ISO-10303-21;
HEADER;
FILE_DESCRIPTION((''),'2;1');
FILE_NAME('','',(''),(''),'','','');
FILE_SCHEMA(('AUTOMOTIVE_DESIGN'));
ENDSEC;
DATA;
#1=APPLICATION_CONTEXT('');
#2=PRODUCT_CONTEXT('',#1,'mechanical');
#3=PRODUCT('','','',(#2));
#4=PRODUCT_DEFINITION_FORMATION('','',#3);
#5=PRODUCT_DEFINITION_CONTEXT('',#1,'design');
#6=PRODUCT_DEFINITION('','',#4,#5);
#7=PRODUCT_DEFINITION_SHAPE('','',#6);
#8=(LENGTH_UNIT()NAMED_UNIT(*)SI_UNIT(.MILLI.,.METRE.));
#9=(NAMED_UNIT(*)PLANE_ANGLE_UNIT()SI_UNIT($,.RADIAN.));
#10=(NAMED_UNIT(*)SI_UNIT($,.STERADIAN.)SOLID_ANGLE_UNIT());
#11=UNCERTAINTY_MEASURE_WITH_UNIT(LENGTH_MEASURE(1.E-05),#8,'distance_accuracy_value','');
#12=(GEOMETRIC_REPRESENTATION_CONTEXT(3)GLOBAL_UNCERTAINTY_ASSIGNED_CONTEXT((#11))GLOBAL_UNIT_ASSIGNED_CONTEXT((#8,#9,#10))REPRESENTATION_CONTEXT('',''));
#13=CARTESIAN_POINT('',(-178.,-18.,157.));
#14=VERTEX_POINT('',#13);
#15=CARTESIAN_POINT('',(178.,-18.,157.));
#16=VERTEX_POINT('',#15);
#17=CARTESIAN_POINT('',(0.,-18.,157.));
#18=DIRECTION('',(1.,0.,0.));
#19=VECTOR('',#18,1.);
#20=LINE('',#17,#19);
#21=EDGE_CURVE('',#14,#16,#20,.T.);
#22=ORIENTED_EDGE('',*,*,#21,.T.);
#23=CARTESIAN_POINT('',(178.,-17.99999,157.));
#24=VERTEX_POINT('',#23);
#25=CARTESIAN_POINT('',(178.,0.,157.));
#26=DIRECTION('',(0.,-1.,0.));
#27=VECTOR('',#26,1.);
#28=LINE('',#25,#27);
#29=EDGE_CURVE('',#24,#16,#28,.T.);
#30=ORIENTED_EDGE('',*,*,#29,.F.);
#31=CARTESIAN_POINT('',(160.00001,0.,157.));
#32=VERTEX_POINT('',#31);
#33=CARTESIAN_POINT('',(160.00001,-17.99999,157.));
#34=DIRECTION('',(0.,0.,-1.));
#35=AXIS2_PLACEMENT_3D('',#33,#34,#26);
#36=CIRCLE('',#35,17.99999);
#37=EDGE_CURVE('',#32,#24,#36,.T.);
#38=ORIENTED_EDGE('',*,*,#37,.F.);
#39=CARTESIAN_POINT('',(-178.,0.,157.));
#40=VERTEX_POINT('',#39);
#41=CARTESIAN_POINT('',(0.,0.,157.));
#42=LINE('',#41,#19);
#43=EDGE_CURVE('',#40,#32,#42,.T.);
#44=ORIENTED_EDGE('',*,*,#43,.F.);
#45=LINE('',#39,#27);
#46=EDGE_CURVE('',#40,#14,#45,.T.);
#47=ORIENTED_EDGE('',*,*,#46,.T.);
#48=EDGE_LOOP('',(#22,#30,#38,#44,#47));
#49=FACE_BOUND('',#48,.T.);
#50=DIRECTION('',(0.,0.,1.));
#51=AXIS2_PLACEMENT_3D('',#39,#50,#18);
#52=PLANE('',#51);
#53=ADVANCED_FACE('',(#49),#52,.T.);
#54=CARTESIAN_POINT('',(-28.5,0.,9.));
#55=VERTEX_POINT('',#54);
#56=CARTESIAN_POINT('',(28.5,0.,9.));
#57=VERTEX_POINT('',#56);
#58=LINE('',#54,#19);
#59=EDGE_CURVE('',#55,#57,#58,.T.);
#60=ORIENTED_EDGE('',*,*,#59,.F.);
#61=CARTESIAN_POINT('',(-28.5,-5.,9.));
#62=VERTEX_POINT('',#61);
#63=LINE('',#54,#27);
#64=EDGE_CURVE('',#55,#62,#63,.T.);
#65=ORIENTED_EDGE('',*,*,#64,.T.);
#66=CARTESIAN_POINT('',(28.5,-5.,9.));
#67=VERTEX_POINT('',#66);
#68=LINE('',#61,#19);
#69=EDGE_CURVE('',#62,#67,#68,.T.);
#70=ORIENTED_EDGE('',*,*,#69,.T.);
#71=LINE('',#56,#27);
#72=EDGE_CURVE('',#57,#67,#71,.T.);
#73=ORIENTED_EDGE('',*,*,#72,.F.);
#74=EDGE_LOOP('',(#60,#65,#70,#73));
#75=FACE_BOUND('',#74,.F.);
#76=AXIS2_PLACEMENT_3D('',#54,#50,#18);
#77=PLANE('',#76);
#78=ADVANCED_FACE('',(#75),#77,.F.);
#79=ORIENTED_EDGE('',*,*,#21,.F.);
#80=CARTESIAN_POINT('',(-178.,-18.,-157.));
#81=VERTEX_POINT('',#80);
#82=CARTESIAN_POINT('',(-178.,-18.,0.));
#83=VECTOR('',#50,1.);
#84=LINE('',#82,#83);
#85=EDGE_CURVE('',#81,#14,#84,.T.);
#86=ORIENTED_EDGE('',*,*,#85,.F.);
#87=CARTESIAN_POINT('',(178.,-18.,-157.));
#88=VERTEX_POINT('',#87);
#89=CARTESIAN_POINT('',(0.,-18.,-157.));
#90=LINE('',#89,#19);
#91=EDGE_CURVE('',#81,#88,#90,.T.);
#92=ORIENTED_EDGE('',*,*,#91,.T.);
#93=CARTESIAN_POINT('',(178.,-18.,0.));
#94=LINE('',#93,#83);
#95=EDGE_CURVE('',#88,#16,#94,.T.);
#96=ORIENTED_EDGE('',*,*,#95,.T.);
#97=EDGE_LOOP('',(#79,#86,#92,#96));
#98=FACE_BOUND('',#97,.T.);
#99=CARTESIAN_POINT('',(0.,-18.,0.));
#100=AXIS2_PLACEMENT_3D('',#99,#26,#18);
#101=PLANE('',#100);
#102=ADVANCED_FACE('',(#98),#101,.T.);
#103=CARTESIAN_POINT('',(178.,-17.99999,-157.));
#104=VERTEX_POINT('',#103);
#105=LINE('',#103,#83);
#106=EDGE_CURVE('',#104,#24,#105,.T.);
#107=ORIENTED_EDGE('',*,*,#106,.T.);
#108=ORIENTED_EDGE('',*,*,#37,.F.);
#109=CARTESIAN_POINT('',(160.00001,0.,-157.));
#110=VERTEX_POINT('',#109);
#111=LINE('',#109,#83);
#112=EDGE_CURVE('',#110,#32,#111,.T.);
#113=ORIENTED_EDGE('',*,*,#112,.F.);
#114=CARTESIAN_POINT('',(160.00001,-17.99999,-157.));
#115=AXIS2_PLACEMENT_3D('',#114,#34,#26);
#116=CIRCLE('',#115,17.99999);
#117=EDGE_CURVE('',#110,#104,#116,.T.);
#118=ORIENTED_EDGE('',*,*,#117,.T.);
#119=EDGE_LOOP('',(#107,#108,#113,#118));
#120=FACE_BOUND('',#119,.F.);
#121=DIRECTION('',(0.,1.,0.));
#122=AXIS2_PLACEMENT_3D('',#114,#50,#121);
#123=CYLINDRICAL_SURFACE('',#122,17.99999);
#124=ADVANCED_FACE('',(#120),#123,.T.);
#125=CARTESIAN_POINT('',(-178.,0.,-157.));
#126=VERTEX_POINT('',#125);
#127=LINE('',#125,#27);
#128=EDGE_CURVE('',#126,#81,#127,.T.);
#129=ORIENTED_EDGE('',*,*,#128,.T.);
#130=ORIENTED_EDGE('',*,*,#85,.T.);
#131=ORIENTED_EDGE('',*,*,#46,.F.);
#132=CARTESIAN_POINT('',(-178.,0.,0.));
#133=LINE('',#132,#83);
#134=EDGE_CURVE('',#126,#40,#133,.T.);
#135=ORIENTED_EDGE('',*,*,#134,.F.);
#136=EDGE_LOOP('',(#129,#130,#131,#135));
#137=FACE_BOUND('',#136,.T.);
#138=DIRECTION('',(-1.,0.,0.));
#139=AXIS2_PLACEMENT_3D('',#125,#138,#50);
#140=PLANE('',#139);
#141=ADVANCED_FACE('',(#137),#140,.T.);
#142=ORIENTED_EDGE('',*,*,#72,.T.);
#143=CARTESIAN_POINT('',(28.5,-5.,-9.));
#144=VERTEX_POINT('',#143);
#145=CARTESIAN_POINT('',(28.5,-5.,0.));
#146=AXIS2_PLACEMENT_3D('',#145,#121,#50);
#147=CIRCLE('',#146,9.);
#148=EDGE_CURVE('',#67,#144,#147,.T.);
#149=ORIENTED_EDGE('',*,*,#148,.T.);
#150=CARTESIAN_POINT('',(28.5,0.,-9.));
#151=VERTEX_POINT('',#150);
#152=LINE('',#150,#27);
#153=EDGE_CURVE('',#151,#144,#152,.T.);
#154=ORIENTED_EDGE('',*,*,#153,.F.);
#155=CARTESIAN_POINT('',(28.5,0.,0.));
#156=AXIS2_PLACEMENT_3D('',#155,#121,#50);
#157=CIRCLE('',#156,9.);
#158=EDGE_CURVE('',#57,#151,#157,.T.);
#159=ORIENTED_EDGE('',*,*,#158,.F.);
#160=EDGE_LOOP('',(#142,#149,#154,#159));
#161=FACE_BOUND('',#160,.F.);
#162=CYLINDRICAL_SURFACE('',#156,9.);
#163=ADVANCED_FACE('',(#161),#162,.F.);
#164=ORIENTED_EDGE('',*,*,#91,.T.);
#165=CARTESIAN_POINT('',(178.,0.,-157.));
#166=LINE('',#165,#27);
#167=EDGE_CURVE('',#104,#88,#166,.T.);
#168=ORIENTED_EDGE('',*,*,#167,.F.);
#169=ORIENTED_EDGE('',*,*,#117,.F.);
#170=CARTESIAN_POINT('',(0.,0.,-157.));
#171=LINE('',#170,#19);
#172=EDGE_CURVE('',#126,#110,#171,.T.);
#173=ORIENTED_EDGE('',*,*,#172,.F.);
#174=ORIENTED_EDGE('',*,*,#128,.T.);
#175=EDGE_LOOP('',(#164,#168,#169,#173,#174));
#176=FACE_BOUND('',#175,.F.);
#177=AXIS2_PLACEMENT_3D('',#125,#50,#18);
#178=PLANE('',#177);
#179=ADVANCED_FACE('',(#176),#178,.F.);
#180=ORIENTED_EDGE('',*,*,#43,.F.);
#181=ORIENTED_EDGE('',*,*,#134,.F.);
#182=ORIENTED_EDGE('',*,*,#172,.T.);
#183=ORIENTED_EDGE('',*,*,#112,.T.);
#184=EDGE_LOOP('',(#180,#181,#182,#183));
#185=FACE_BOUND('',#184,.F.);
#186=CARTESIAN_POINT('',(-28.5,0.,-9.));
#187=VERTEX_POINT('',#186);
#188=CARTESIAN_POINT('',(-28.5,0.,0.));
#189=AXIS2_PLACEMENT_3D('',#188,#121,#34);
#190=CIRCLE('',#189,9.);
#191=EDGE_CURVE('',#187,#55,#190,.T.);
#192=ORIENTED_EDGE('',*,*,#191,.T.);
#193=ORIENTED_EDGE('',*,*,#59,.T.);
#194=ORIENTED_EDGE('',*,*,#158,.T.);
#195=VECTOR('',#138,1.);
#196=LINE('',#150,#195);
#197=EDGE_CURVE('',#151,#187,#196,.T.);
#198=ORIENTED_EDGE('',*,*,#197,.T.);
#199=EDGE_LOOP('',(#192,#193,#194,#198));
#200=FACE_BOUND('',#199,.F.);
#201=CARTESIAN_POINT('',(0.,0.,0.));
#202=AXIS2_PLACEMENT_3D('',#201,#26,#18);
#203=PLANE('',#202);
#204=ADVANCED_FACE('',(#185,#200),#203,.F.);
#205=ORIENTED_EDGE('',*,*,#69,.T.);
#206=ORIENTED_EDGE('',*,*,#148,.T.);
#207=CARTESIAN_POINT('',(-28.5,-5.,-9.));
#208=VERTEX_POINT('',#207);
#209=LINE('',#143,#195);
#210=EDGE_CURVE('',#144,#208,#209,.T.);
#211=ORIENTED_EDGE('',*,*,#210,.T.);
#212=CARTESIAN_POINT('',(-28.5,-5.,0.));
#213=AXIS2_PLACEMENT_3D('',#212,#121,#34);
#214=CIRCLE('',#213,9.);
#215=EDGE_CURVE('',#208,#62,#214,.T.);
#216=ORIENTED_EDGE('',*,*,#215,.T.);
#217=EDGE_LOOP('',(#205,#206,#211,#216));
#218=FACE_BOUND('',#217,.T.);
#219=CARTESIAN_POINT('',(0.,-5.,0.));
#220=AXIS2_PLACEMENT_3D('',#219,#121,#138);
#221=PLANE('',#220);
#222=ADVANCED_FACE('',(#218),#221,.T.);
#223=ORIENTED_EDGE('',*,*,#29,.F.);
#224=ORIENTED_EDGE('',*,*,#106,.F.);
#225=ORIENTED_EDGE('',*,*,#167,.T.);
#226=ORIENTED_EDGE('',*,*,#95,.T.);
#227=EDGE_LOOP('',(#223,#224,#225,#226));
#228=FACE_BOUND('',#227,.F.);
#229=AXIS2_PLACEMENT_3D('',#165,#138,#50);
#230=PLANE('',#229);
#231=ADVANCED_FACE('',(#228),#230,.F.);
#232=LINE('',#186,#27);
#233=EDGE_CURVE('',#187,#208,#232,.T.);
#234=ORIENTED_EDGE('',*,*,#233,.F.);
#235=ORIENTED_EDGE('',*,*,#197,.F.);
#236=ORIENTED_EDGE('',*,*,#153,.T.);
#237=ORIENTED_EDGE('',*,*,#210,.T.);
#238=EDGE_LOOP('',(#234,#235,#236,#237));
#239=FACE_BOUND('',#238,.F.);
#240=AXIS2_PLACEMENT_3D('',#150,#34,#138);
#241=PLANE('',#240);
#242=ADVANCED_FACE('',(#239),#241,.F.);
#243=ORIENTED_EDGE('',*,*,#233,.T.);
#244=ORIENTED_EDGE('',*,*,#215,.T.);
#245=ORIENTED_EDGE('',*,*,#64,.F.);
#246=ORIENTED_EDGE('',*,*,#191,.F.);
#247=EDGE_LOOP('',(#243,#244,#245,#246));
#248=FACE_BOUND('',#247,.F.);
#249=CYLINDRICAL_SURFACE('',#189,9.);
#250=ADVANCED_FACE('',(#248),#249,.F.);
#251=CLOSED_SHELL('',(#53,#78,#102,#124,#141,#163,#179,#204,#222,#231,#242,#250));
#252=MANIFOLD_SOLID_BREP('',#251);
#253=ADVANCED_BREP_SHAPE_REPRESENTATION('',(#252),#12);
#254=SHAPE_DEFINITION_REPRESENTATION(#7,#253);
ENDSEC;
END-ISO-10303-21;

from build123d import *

# Parameters (mm, degrees)
F0_W     = 356
F0_H     = 314
F1_DEPTH = 18
F3_DEPTH = 5
F4_R     = 17.99999


# Not quite as in the source:
# - a fillet or chamfer is up to 0.001 mm smaller than in the source, because OpenCascade refuses the exact size


with BuildPart() as f1:
    # F0 (on Front) → F1 (new body)
    with BuildSketch(Plane.XZ):
        Rectangle(F0_W, F0_H)
    extrude(amount=F1_DEPTH)

    # F2 (on face) → F3 (cut)
    with BuildSketch(Plane(origin=(0, 0, 0), x_dir=(-1, 0, 0), z_dir=(0, 1, 0))):
        with BuildLine():
            ThreePointArc((28.5, -9), (37.5, 0), (28.5, 9))
            Line((28.5, 9), (-28.5, 9))
            ThreePointArc((-28.5, 9), (-37.5, 0), (-28.5, -9))
            Line((-28.5, -9), (28.5, -9))
        make_face()
    extrude(amount=-F3_DEPTH, mode=Mode.SUBTRACT)

    # F4 (radius 18 in the source; OpenCascade refuses exactly that, so slightly less here)
    f4_edges = [f1.edges().sort_by_distance(p)[0] for p in [
        (178, 0, 0),
    ]]
    fillet(f4_edges, radius=F4_R)


solid = f1.part
